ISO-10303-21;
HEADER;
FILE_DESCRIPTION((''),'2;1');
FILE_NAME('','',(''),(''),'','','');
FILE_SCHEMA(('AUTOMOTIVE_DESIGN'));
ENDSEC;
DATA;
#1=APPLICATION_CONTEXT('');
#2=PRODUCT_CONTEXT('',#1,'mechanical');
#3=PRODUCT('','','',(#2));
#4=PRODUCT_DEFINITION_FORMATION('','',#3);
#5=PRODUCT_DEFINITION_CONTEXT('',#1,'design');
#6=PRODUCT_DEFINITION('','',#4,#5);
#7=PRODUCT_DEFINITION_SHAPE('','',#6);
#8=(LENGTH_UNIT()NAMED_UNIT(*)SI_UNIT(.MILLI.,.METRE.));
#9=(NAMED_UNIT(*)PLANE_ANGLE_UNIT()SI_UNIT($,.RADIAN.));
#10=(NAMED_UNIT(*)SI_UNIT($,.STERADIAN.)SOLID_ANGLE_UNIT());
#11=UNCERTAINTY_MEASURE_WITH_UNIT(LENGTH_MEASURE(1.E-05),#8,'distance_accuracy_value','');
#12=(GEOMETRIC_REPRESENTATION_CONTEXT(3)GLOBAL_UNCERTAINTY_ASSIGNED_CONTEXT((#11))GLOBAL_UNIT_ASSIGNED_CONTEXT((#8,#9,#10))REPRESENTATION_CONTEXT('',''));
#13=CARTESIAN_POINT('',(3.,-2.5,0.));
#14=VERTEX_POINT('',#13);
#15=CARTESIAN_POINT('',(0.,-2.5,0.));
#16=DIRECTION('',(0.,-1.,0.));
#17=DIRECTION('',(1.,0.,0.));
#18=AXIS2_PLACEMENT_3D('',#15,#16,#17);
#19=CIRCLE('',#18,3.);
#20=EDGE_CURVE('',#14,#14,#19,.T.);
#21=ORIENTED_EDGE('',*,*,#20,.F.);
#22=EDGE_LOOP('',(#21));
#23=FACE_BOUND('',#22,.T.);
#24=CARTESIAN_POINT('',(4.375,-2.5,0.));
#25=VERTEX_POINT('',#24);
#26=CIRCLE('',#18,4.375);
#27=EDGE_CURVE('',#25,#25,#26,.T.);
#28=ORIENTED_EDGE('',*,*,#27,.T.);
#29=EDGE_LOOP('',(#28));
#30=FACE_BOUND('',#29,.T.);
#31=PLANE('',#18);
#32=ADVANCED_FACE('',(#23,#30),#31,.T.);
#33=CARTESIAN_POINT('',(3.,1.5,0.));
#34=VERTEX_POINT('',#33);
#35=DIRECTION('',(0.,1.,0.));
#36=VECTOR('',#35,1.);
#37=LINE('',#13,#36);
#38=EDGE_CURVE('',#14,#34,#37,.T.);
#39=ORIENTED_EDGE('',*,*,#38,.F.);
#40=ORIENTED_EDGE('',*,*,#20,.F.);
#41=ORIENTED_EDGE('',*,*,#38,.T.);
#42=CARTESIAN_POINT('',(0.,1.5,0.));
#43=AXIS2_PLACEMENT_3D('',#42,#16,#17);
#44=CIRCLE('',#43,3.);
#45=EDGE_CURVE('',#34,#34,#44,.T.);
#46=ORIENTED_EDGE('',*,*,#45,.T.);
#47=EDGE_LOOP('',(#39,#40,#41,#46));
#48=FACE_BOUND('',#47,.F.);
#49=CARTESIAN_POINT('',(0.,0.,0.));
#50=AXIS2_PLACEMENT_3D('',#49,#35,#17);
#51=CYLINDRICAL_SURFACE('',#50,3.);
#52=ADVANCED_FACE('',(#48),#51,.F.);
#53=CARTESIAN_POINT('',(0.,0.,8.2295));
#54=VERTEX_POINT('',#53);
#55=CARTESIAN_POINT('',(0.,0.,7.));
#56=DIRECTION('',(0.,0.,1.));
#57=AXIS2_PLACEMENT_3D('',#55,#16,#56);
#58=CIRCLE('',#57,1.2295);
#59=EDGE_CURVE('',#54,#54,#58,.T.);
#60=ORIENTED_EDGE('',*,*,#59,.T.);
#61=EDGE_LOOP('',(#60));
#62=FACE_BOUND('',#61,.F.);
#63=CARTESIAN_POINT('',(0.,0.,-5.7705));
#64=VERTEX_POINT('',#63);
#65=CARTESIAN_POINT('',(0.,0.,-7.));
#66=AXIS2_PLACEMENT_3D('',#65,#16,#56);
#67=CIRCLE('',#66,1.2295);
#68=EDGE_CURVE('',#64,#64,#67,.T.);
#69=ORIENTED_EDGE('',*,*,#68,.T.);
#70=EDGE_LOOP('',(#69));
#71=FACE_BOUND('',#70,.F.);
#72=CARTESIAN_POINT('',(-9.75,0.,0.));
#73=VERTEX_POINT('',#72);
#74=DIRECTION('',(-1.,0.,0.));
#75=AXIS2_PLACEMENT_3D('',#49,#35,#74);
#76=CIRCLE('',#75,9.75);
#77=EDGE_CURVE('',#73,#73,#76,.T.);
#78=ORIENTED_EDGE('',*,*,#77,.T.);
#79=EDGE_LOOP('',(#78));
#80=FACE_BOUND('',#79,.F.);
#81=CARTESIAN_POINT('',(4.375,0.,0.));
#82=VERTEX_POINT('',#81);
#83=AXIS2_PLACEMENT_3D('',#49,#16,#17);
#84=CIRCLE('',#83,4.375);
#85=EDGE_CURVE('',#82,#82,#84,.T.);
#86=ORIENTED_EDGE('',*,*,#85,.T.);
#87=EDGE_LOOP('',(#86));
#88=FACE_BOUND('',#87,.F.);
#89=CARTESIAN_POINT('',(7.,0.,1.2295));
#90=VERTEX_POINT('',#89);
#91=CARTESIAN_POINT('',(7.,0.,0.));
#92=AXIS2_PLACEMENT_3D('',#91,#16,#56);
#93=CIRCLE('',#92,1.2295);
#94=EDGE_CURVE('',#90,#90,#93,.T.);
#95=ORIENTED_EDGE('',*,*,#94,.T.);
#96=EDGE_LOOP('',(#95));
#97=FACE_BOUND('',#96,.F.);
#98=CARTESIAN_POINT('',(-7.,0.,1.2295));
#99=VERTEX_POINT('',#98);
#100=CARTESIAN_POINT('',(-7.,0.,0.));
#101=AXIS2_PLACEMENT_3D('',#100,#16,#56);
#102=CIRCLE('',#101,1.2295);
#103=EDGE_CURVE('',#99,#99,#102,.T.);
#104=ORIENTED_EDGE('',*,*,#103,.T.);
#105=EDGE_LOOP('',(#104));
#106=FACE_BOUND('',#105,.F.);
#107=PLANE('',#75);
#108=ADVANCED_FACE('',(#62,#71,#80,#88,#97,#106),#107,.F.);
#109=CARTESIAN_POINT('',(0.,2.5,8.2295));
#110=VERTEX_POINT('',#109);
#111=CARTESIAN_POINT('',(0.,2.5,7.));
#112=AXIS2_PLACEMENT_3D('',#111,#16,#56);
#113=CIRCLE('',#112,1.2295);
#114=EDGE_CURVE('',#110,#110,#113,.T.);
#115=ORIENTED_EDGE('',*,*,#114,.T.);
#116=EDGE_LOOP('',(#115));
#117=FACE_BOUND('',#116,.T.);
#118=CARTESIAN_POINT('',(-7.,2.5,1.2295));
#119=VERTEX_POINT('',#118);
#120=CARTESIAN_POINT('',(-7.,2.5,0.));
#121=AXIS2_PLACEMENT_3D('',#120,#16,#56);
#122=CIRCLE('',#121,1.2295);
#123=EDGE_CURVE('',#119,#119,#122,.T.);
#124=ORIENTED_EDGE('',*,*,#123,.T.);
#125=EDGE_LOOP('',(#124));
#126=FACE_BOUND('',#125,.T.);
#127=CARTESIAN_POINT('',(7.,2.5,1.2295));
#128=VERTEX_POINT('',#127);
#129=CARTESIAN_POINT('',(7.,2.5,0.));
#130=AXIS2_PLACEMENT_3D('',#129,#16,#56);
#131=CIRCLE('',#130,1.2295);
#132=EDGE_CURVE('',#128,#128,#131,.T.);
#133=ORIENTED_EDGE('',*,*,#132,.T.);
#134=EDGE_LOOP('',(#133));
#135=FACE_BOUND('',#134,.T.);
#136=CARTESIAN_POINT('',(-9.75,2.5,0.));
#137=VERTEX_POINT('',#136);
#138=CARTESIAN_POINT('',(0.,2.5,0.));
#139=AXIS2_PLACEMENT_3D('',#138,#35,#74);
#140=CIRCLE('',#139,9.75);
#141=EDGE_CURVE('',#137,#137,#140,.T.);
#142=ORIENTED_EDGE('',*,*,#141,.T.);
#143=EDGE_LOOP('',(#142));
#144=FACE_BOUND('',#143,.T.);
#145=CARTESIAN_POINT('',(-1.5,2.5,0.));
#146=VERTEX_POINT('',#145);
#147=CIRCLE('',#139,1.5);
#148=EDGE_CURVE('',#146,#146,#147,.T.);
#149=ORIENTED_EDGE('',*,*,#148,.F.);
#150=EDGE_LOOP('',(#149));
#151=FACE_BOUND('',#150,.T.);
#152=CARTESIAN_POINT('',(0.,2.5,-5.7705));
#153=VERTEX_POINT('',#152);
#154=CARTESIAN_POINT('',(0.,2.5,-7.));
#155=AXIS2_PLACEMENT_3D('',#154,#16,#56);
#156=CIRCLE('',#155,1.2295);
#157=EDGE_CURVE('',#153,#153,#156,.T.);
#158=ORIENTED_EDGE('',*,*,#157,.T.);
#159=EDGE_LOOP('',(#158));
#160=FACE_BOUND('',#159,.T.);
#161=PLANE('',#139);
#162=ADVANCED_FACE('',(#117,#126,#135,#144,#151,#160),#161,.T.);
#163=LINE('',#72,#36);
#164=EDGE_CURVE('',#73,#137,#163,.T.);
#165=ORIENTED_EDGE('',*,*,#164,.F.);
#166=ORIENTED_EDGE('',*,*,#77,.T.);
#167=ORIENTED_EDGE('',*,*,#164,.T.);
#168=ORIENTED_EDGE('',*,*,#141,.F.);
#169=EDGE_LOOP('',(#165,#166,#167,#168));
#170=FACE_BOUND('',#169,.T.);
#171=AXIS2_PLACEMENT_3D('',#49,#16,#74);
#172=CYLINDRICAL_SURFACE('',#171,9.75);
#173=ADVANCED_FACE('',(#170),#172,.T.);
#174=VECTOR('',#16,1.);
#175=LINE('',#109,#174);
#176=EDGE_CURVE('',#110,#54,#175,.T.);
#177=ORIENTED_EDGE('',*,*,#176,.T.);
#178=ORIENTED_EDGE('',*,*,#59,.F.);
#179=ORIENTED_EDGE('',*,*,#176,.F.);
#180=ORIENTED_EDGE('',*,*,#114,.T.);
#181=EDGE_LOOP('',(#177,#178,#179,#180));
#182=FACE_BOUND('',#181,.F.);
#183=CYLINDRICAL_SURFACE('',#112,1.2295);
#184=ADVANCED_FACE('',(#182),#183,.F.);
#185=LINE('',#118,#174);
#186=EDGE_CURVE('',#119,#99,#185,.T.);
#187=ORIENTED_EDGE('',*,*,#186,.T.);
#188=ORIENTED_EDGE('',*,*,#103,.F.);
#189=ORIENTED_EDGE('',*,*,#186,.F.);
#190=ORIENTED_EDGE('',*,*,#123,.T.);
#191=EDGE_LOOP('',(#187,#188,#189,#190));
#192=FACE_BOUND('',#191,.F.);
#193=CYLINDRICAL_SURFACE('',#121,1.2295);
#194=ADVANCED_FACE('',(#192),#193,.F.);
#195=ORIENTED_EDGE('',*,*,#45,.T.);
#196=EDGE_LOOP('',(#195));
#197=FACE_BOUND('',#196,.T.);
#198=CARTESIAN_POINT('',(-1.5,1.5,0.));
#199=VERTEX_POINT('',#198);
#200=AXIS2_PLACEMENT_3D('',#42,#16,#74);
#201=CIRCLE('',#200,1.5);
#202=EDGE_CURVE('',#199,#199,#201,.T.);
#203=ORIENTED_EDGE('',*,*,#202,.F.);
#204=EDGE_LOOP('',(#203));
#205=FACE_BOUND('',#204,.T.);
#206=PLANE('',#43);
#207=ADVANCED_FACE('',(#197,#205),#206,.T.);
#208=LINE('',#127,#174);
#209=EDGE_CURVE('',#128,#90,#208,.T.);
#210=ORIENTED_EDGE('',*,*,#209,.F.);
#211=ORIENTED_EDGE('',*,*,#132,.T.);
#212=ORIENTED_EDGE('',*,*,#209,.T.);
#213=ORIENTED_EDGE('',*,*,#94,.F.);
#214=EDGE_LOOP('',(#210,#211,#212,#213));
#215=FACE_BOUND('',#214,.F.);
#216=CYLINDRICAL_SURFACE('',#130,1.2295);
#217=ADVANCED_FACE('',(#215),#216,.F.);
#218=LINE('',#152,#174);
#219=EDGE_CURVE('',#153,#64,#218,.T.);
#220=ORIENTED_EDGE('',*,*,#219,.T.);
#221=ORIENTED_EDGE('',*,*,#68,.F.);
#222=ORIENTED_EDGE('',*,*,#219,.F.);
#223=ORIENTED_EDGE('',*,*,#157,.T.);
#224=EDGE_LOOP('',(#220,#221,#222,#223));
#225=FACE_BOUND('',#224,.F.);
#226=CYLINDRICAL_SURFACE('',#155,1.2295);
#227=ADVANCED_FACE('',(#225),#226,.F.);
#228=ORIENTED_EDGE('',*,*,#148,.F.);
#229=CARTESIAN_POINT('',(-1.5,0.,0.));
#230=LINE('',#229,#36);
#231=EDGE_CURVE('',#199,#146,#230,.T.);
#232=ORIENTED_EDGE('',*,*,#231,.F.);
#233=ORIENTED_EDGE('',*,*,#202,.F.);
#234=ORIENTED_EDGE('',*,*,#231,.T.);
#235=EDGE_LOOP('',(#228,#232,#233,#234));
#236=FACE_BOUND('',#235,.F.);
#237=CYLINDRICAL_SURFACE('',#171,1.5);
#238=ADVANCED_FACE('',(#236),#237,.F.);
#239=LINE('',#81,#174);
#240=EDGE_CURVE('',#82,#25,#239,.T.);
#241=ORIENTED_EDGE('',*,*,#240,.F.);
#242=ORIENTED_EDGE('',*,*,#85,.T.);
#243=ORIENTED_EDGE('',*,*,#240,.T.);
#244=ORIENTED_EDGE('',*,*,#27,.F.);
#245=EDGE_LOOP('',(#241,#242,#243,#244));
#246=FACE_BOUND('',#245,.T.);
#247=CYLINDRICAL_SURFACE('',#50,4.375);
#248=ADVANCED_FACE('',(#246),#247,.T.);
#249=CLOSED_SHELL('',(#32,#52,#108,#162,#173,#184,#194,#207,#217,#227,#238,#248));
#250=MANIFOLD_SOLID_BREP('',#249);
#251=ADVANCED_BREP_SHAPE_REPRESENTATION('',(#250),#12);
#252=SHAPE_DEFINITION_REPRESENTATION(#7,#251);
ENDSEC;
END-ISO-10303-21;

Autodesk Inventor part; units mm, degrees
ref_plane "YZ Plane" through (0, 0, 0) normal (1, 0, 0) x (0, 1, 0)
ref_plane "XZ Plane" through (0, 0, 0) normal (0, 1, 0) x (-1, 0, 0)
ref_plane "XY Plane" through (0, 0, 0) normal (0, 0, 1) x (1, 0, 0)
sketch "Sketch1" plane through (0, 0, 0) normal (0, 1, 0) x (-1, 0, 0)
  circle A0 centre (0, 0) radius 9.75
  circle A1 centre (0, 0) radius 1.5
  circle A2 centre (0, 0) radius 7 construction
  line L0 (0, 0) -> (7, 0) construction
  point P0 (0, 7)
  point P1 (-7, 0)
  point P2 (0, -7)
  dimension "d3" = 14
  dimension "d0" = 19.5
  dimension "d1" = 3
  dimension "d16" = 360
extrude "Extrusion1" add sketch "Sketch1" along normal blind 2.5
sketch "Sketch2" plane through (0, 0, 0) normal (0, -1, 0) x (1, 0, 0)
  circle A0 centre (0, 0) radius 4.375
  circle A1 centre (0, 0) radius 3
  dimension "d10" = 8.75
  dimension "d11" = 6
extrude "Extrusion2" add sketch "Sketch2" along normal blind 2.5
sketch "Sketch3" plane through (0, 0, 0) normal (0, -1, 0) x (1, 0, 0)
  circle A0 centre (0, 0) radius 3 projected
  circle A1 centre (0, 0) radius 1.5 projected
extrude "Extrusion3" cut sketch "Sketch3" against normal blind 1.5
sketch "Sketch4" plane through (0, 2.5, 0) normal (0, 1, 0) x (1, 0, 0)
  circle A0 centre (0, 0) radius 7 construction
  line L0 (0, 7) -> (0, 0) construction
  point P0 (-7, 0)
  point P1 (0, -7)
  point P2 (7, 0)
  dimension "d20" = 14
  dimension "d23" = 360
hole "Hole1" at (-7, 2.5, 0) at (0, 2.5, 7) at (7, 2.5, 0) at (0, 2.5, -7) direction (0, -1, 0) diameter 2.459 end up to surface thread size "M3x0.5" class "6H" standard "ISO Metric profile"
properties part number "CH"
